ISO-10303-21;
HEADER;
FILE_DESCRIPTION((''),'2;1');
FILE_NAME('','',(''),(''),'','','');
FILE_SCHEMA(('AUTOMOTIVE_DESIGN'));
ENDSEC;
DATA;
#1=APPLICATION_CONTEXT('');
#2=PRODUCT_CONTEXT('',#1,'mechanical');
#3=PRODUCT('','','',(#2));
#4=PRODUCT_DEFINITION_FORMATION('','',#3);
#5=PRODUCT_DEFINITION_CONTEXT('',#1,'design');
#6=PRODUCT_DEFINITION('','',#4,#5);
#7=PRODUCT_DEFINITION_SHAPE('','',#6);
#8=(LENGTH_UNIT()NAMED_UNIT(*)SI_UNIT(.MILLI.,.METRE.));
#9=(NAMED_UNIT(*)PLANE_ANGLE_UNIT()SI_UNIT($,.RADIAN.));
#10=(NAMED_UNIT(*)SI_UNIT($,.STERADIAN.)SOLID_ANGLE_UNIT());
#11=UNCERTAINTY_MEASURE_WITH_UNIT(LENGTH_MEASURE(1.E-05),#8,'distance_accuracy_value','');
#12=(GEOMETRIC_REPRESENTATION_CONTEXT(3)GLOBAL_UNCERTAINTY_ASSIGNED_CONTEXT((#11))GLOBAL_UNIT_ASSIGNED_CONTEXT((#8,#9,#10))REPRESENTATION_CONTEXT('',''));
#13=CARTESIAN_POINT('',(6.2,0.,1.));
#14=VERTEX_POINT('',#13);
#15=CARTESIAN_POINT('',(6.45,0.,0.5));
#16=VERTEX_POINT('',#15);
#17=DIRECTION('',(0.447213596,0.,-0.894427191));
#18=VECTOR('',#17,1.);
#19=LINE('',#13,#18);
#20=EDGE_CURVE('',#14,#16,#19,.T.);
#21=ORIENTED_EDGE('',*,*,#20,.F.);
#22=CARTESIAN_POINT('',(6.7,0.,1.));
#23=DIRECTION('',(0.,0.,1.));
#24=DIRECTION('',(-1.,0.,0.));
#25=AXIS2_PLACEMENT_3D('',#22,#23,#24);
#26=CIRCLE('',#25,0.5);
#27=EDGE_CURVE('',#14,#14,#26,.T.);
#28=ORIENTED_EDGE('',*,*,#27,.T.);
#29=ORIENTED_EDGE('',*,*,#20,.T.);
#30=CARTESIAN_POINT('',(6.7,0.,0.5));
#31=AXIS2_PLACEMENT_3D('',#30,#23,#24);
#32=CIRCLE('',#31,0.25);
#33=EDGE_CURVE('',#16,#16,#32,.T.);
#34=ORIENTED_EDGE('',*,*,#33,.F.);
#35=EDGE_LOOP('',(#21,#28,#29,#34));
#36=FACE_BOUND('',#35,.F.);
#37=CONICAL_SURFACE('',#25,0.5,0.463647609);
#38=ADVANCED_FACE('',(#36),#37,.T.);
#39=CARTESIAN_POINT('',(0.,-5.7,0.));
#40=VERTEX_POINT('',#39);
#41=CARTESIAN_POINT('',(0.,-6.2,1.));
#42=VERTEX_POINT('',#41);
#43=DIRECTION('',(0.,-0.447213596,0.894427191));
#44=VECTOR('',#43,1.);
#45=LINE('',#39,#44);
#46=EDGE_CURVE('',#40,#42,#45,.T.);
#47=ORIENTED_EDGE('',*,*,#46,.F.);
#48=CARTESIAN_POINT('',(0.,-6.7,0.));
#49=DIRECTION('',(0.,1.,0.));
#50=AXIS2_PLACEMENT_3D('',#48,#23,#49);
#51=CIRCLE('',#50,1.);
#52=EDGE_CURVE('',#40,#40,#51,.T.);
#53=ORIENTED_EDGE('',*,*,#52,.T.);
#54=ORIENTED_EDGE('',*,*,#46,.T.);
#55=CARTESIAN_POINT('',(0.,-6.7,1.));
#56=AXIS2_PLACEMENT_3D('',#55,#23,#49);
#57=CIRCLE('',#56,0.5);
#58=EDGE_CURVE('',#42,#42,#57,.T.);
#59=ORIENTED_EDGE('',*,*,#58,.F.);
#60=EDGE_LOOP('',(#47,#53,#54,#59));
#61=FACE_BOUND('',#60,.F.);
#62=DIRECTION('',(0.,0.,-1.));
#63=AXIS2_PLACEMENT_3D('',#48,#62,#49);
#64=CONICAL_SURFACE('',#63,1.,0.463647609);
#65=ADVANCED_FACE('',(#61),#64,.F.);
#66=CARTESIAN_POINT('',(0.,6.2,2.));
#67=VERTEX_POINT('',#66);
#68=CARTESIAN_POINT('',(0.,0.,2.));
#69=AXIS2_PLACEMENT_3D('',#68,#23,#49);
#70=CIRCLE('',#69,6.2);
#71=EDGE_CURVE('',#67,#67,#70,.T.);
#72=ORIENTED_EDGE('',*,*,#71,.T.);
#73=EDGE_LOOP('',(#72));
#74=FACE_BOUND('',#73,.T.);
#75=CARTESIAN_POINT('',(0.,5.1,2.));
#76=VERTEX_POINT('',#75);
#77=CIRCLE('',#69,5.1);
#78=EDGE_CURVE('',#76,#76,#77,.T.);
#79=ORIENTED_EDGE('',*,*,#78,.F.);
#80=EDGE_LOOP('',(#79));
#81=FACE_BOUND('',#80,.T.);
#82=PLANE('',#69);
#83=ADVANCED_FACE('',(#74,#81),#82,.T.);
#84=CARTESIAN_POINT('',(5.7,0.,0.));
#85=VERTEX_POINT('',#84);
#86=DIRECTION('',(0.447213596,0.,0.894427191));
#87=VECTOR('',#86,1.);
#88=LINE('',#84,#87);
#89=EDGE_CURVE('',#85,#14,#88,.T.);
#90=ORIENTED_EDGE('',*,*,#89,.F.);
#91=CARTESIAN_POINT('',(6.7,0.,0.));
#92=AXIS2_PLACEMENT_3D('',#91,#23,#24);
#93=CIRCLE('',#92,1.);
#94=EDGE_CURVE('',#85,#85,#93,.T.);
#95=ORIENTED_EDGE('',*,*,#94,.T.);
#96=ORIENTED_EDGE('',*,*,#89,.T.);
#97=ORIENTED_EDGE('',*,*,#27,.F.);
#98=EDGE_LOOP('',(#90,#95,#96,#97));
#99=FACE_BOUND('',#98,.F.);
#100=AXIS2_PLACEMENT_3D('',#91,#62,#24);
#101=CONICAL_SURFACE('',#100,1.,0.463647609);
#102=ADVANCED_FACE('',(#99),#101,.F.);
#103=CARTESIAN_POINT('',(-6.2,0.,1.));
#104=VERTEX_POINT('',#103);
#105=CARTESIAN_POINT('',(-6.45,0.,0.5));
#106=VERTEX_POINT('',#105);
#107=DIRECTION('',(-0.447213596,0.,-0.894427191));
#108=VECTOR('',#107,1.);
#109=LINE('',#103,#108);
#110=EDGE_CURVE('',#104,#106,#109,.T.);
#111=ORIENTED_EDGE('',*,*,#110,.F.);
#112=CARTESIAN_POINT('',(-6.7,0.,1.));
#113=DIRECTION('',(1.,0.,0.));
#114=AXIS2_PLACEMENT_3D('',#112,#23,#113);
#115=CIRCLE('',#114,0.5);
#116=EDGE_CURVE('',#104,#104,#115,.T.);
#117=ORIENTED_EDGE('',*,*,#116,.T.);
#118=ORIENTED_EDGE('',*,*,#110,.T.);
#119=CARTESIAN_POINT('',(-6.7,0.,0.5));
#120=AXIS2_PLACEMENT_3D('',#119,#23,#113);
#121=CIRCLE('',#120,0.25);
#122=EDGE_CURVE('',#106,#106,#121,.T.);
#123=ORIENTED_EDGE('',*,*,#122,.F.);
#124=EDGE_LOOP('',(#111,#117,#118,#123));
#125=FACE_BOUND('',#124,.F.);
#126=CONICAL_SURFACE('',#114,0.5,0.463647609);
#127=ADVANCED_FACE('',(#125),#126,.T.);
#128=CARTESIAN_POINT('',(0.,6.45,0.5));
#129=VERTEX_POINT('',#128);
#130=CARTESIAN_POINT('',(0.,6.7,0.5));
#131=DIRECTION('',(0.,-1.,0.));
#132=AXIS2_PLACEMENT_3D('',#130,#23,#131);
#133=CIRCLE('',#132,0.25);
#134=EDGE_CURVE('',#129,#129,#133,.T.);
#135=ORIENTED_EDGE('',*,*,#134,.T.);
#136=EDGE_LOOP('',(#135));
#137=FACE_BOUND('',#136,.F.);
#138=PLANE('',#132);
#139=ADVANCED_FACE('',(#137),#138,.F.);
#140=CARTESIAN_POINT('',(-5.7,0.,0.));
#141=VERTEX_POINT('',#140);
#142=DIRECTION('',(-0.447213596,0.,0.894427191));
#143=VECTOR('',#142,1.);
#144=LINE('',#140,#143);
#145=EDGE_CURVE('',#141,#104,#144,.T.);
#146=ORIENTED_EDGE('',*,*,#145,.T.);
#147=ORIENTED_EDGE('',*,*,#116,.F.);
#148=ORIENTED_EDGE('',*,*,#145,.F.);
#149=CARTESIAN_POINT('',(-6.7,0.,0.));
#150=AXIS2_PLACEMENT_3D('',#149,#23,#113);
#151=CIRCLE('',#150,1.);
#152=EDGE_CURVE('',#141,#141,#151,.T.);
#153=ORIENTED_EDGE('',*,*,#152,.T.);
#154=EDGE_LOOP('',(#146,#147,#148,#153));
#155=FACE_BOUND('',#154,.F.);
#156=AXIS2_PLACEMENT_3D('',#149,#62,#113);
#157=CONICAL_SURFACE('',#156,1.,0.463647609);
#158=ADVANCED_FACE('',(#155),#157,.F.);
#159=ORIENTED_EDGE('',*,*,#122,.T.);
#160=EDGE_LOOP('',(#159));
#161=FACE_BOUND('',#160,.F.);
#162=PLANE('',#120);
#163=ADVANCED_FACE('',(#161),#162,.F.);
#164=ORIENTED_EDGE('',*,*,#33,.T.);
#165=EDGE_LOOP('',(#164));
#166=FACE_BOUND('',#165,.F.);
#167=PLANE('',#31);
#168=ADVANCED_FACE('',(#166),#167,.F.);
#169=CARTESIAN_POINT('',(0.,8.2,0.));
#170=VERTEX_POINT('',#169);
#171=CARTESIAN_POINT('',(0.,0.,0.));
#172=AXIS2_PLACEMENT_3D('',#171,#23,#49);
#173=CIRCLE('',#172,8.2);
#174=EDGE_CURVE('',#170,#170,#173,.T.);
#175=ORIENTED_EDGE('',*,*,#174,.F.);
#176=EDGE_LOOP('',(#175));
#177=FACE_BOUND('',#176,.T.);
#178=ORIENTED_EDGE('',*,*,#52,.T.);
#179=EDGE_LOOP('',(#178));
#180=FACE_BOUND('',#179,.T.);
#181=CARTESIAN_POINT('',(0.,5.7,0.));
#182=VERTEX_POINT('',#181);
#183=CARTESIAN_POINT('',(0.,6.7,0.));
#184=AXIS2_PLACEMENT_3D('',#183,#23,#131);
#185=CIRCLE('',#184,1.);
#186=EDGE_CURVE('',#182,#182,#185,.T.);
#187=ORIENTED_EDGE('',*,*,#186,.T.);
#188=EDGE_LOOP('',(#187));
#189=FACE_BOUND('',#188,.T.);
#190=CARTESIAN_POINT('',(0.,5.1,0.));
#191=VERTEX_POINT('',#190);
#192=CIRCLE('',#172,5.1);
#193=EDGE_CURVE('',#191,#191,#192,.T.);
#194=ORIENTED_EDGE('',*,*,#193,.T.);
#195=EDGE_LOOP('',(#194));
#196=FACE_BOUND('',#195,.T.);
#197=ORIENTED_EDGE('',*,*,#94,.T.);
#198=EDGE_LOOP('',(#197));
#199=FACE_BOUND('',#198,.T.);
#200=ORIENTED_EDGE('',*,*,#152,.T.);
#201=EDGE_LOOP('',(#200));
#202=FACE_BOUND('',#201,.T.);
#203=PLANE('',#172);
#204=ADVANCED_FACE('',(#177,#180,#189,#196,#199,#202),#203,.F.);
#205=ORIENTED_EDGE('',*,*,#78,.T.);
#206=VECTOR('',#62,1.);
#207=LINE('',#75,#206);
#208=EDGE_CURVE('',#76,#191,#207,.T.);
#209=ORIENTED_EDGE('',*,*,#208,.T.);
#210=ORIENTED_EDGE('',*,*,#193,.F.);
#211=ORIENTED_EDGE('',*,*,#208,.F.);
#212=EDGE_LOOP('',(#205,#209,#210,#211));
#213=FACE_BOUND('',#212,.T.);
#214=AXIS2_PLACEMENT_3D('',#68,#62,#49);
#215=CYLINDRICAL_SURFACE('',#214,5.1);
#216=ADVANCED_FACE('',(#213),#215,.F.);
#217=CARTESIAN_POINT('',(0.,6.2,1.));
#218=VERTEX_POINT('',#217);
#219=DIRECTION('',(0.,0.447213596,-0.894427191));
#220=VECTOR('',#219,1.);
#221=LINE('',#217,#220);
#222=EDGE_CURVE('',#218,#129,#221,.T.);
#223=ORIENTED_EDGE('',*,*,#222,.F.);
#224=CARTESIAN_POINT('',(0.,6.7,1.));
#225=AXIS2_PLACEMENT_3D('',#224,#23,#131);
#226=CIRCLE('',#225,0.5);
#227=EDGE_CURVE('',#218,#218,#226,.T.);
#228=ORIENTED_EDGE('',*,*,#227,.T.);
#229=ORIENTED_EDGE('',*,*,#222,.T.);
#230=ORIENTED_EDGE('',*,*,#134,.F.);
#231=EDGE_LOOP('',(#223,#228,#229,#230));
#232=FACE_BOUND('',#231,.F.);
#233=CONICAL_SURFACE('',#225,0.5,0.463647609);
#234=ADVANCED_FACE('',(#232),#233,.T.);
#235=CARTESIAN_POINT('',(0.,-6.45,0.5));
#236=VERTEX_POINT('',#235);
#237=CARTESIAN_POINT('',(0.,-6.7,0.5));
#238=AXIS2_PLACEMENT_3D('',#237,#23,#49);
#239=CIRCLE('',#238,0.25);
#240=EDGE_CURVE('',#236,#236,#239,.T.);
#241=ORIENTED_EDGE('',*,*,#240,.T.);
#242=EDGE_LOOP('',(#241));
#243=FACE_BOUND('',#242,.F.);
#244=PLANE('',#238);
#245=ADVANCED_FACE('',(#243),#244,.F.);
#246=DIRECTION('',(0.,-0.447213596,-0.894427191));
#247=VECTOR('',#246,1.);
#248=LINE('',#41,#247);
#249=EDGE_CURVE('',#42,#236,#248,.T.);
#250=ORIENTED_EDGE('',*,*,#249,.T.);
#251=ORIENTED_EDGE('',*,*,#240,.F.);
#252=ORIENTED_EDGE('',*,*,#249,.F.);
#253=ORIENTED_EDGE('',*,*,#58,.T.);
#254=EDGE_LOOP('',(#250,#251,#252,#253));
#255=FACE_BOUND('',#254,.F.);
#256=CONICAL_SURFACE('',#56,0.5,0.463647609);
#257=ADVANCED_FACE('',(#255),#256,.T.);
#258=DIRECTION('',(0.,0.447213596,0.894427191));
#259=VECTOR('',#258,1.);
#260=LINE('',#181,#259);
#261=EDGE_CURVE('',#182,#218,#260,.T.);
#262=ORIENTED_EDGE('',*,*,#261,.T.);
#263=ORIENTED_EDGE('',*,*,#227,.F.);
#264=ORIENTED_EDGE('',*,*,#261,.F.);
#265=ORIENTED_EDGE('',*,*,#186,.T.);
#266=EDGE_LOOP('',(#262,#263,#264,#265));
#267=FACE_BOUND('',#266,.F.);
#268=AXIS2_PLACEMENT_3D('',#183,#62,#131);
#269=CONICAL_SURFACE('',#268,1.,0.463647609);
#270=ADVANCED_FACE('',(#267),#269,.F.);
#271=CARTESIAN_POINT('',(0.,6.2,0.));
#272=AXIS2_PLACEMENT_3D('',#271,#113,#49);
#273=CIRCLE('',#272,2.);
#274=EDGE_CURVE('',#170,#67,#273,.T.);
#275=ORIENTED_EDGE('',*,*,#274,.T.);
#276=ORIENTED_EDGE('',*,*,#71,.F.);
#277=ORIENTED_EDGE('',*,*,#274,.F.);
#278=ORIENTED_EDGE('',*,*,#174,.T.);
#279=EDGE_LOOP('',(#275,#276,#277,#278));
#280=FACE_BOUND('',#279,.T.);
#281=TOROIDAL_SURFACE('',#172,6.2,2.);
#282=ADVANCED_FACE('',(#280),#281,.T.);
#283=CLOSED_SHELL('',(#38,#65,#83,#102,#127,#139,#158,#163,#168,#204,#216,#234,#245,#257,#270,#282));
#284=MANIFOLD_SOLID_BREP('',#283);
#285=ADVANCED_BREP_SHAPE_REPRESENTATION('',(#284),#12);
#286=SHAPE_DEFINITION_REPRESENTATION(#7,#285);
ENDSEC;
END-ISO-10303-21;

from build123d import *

# Parameters (mm, degrees)
F3_COPIES_COUNT = 4


# Not quite as in the source:
# - a pattern or mirror of a feature is missing from the dataset's text; its kind, count and spacing are read off the source's solid


with BuildPart() as f1:
    # F0 (on Right) → F1 (revolve)
    with BuildSketch(Plane.YZ):
        with BuildLine():
            Line((5.1, 2), (5.1, 0))
            Line((5.1, 0), (8.2, 0))
            ThreePointArc((8.2, 0), (7.6142135624, 1.4142135624), (6.2, 2))
            Line((6.2, 2), (5.1, 2))
        make_face()
    revolve(axis=Axis((0, 0, 1), (0, 0, 1)))

    # F2 (on Right) → F3 (revolve, cut)
    with BuildSketch(Plane.YZ):
        Polygon((-6.45, 0.5), (-6.7, 0.5), (-6.7, 0), (-5.7, 0), (-6.2, 1), align=None)
    f3 = revolve(axis=Axis((0, -6.7, 0.25), (0, 0, 1)), mode=Mode.SUBTRACT)

    # F3_copies: F3 ×4 about axis
    f3_copies_axis = Axis((0, 0, 0), (0, 0, 1))
    for i in range(1, F3_COPIES_COUNT):
        add(f3.rotate(f3_copies_axis, i * 360 / F3_COPIES_COUNT), mode=Mode.SUBTRACT)


solid = f1.part
